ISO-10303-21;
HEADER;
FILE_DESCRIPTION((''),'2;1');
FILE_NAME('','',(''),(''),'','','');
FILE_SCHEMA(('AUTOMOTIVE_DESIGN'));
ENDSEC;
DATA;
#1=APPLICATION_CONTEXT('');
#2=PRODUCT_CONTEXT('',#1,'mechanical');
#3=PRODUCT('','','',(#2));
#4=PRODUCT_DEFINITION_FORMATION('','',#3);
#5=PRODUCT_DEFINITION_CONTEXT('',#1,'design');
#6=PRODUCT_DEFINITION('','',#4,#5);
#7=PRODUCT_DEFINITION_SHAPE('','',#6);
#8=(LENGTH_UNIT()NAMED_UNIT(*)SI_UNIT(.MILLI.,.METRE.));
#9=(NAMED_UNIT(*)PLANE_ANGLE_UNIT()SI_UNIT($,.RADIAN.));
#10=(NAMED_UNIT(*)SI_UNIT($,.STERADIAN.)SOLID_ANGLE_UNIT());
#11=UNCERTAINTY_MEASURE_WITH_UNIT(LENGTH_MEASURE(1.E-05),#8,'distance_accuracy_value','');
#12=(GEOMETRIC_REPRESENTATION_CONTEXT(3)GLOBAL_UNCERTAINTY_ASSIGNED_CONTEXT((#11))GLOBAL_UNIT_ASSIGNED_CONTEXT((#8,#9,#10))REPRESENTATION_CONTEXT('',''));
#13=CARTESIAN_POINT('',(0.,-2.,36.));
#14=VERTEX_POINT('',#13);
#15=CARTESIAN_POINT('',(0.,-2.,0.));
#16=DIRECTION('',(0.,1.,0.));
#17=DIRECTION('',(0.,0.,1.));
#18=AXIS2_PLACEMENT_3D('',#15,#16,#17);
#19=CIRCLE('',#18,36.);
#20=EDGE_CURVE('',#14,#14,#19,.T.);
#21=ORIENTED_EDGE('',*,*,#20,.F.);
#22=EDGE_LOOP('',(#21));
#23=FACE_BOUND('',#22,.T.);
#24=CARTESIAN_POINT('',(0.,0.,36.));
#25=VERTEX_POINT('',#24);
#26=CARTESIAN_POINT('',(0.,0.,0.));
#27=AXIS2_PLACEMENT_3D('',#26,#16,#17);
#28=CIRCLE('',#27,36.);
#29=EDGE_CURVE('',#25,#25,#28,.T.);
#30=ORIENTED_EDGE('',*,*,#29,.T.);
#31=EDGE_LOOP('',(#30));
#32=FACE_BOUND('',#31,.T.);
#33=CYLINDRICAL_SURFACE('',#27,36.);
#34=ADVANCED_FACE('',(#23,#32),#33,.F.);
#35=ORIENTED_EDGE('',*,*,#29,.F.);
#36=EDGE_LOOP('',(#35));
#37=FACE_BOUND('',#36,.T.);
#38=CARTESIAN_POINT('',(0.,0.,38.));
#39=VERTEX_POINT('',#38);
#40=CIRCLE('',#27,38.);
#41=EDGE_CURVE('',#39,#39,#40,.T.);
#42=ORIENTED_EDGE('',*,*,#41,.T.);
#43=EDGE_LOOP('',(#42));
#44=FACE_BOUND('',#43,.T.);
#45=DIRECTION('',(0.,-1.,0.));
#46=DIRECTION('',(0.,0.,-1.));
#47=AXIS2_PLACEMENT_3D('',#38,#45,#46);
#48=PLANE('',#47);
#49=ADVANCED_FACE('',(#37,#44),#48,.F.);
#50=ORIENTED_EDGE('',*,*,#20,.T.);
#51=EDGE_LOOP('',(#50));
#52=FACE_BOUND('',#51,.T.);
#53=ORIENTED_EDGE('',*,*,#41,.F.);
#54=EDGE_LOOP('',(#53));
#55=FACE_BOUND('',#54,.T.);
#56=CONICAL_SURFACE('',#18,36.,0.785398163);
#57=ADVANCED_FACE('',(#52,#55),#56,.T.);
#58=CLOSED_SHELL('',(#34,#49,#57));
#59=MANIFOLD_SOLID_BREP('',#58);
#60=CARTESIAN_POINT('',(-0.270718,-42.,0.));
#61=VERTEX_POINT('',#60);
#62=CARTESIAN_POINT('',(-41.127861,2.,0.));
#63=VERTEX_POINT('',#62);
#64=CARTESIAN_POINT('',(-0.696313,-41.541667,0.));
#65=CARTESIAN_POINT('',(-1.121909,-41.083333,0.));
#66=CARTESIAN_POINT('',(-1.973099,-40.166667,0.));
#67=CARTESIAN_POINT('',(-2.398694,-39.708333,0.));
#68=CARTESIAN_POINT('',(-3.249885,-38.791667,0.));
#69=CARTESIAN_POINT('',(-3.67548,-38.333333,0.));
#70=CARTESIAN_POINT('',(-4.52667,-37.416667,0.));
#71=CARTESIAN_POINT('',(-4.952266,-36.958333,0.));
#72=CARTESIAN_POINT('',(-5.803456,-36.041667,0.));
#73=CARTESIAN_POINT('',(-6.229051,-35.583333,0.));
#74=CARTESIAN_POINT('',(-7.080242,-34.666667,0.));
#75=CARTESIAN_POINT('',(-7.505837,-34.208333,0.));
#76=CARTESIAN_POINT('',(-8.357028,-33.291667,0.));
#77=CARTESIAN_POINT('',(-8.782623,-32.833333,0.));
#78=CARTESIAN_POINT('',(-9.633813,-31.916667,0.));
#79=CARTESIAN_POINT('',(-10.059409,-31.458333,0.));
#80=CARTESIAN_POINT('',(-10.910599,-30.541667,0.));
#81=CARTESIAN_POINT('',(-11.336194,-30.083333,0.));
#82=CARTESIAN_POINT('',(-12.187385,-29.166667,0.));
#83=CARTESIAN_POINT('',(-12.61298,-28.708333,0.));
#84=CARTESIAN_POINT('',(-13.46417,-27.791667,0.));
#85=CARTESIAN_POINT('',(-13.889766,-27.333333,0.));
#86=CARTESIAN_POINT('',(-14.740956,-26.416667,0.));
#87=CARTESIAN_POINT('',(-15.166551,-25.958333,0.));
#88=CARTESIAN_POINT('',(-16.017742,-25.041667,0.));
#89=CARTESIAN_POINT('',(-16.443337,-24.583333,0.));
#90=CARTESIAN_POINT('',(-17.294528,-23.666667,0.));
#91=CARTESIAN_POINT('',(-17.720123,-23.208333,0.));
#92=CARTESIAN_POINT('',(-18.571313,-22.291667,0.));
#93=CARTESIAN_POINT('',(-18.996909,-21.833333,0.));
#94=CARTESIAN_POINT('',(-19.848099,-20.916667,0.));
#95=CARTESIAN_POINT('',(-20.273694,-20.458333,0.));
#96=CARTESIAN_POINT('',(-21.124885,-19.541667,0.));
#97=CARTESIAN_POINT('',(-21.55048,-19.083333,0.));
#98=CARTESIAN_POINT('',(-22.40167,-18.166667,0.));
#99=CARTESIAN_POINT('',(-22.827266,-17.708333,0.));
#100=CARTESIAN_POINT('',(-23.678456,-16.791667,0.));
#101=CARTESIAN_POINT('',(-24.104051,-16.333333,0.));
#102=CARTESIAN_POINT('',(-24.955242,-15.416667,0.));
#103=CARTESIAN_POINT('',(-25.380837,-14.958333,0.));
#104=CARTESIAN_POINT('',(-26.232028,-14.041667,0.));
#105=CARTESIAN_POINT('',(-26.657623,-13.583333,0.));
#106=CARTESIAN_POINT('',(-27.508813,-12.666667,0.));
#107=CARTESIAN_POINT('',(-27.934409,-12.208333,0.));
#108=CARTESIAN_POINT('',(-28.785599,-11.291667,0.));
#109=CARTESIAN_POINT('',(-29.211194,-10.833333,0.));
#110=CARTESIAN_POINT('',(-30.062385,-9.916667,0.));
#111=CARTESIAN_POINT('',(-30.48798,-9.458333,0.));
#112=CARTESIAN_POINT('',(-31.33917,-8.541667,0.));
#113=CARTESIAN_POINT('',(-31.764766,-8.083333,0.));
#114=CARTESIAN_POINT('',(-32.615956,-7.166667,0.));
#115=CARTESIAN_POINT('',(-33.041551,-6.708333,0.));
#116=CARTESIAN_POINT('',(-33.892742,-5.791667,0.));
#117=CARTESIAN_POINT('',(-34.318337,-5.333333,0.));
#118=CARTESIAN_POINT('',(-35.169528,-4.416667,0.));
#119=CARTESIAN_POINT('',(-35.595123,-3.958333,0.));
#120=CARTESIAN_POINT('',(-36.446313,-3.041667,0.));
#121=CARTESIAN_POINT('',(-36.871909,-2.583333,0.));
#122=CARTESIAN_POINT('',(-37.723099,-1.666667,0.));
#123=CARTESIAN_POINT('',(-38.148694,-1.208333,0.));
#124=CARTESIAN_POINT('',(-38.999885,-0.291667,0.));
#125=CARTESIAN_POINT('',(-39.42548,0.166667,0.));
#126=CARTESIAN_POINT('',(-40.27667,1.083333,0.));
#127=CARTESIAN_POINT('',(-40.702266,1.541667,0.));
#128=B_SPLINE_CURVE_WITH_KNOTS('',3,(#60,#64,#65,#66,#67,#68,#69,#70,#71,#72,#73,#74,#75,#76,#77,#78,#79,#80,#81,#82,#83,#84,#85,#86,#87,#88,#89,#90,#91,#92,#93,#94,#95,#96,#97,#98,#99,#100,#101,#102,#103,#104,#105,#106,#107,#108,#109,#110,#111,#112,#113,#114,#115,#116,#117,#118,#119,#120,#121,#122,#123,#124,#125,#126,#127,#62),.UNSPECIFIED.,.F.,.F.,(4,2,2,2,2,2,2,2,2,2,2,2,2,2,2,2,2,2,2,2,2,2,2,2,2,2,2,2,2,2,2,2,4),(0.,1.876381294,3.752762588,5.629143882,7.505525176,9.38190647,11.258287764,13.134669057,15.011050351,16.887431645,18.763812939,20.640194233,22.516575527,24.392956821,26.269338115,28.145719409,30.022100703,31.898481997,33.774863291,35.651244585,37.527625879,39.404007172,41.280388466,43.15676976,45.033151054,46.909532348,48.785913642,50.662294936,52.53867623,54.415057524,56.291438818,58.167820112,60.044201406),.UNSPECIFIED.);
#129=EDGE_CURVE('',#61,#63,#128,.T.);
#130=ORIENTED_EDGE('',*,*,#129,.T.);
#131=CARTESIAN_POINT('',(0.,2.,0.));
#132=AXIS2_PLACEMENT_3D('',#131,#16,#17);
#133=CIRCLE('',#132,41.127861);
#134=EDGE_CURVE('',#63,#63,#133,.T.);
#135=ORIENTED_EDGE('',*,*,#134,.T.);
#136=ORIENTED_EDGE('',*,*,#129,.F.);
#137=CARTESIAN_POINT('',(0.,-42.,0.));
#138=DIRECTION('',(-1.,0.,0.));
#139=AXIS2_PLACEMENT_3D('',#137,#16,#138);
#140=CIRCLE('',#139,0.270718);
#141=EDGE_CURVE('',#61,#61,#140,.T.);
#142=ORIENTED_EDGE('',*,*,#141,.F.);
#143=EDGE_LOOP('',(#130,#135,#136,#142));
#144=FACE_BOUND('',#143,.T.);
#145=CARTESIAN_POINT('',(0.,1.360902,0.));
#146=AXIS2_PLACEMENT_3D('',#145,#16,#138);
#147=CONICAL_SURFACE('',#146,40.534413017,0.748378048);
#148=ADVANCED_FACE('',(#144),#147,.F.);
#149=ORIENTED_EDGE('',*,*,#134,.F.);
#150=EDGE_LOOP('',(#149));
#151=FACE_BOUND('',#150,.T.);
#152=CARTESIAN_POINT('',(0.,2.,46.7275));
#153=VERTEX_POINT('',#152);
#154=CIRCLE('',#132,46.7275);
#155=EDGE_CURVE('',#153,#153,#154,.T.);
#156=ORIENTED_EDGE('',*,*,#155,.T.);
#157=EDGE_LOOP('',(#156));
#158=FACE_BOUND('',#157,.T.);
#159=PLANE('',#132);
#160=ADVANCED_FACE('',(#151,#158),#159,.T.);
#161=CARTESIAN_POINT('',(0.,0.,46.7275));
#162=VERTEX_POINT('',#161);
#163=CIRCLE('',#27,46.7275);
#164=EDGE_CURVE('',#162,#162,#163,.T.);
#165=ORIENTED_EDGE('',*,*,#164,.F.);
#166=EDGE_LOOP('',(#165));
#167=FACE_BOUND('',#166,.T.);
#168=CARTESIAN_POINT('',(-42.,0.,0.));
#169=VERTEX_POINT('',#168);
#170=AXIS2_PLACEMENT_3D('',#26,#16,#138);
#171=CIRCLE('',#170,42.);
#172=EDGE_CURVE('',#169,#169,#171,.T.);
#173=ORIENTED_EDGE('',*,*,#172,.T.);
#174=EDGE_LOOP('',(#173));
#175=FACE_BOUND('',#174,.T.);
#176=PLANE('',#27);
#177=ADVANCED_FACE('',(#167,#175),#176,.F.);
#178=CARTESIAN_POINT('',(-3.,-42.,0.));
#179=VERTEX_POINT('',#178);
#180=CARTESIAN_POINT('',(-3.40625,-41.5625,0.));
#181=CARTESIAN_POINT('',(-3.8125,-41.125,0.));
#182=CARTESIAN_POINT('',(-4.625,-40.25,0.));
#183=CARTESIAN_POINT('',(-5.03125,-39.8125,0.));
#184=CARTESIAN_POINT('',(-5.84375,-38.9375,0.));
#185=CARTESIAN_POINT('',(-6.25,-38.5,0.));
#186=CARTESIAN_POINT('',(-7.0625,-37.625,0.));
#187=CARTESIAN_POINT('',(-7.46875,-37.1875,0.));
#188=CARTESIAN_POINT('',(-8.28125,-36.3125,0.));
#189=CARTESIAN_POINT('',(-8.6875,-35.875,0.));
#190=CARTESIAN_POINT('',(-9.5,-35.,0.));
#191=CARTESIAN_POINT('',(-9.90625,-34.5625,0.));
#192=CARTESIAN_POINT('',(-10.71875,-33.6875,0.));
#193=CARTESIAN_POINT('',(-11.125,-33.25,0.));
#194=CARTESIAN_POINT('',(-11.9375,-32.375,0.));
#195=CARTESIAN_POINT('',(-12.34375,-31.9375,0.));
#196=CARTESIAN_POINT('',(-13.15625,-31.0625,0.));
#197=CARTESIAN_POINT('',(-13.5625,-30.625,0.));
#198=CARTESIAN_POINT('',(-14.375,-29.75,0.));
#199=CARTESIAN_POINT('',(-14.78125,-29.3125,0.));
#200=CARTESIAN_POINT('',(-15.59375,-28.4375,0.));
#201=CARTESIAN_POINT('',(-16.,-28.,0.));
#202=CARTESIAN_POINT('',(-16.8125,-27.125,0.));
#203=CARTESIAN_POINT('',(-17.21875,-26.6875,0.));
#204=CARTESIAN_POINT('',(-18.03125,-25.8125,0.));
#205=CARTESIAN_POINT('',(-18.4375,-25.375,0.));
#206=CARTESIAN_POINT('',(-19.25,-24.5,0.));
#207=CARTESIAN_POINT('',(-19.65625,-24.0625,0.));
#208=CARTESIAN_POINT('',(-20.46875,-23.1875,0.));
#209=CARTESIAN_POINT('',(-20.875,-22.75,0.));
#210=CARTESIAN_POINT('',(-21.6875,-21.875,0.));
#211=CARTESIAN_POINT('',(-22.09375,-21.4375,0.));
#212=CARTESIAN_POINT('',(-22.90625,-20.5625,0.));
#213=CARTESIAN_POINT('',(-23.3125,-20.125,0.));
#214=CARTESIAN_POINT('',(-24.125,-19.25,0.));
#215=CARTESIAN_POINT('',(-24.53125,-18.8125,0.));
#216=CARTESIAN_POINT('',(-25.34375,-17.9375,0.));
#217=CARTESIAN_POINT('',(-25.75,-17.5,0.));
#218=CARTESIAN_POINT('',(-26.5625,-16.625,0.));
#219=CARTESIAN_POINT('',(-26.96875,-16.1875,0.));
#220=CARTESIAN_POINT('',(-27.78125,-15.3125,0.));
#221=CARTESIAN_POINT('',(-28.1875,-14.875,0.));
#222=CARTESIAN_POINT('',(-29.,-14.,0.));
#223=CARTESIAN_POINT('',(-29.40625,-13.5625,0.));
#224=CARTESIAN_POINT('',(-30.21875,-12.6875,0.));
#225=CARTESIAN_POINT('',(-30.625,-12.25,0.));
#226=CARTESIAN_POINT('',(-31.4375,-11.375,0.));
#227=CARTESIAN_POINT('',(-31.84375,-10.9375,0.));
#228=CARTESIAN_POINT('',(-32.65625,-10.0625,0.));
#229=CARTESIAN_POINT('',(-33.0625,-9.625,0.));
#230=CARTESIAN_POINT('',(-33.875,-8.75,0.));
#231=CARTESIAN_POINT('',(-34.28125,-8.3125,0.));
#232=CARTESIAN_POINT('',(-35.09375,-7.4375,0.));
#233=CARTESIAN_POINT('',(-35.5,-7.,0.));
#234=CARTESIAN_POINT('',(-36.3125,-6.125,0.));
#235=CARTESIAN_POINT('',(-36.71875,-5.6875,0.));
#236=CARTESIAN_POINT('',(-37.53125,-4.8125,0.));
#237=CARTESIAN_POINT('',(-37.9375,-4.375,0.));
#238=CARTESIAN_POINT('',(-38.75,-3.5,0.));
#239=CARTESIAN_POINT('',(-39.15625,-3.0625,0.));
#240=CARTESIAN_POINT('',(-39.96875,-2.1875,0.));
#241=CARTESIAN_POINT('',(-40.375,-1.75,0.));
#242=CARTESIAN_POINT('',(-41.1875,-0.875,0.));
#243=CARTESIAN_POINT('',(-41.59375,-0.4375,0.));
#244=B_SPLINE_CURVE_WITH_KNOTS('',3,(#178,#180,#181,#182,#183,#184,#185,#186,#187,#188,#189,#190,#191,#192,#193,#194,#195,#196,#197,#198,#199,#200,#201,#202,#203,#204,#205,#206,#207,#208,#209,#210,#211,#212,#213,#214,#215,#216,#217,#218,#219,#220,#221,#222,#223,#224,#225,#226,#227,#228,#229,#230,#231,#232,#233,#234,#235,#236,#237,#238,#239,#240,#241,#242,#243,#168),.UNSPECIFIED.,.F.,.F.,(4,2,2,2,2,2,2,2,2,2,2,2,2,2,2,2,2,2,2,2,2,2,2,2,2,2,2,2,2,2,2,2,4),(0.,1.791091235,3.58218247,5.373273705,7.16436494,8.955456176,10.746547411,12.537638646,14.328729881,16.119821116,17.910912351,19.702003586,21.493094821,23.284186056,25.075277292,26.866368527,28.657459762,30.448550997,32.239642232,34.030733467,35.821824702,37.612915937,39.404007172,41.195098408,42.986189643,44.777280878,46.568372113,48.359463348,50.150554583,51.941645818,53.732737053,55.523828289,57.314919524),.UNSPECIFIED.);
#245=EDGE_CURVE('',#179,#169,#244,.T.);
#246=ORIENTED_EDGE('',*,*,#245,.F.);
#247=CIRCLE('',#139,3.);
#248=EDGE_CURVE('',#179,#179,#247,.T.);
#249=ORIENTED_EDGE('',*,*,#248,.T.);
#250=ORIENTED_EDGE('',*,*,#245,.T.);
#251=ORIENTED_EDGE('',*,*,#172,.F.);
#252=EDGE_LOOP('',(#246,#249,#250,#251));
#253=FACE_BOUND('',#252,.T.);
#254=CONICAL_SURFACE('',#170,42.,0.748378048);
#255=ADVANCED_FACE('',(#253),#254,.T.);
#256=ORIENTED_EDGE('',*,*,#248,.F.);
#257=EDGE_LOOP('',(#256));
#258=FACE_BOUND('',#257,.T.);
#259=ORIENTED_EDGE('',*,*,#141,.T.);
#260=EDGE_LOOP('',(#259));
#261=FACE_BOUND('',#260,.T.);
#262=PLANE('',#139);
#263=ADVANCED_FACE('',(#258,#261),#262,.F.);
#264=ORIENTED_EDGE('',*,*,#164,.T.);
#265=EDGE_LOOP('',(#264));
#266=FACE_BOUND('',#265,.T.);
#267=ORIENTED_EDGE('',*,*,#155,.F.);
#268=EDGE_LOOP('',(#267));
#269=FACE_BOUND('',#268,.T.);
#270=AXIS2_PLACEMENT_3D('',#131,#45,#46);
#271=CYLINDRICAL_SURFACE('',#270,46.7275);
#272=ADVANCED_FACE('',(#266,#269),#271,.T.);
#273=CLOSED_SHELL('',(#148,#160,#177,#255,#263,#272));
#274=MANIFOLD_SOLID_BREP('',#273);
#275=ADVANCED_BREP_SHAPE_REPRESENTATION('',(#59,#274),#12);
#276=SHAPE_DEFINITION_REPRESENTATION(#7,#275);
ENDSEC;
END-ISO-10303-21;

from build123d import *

# Parameters (mm, degrees)
SKETCH1_R           = 46.7275
BOSS_EXTRUDE2_DEPTH = 2


# Read off the part's stored shape, not the designer's step: Shell1
with BuildPart() as part:
    # Sketch2 → Revolve1 (revolve)
    with BuildSketch(Plane.XY):
        Polygon((0, 0), (0, -42), (-3, -42), (-42, 0), align=None)
    revolve(axis=Axis((0, 0, 0), (0, -1, 0)))

    # Sketch1 → Boss-Extrude2 (add)
    with BuildSketch(Plane(origin=(0, 0, 0), x_dir=(1, 0, 0), z_dir=(0, 1, 0))):
        with Locations(Location((0, 0, 0), (0, 0, 270))):
            Circle(SKETCH1_R)
    extrude(amount=BOSS_EXTRUDE2_DEPTH)

    # Shell1 outline → Shell1 (revolve, cut)
    with BuildSketch(Plane.XY):
        Polygon((41.127860975, 2), (0, 2), (0, -42), (0.270718118, -42), align=None)
    revolve(axis=Axis((0, 0, 0), (0, 1, 0)), mode=Mode.SUBTRACT)


with BuildPart() as body_2:
    # Sketch3 → Revolve2 (revolve)
    with BuildSketch(Plane(origin=(0, 0, 0), x_dir=(0, 0, -1), z_dir=(1, 0, 0))):
        Polygon((-38, 0), (-36, 0), (-36, -2), align=None)
    revolve(axis=Axis((0, 0, 0), (0, -1, 0)))


solid = Compound([part.part, body_2.part])
